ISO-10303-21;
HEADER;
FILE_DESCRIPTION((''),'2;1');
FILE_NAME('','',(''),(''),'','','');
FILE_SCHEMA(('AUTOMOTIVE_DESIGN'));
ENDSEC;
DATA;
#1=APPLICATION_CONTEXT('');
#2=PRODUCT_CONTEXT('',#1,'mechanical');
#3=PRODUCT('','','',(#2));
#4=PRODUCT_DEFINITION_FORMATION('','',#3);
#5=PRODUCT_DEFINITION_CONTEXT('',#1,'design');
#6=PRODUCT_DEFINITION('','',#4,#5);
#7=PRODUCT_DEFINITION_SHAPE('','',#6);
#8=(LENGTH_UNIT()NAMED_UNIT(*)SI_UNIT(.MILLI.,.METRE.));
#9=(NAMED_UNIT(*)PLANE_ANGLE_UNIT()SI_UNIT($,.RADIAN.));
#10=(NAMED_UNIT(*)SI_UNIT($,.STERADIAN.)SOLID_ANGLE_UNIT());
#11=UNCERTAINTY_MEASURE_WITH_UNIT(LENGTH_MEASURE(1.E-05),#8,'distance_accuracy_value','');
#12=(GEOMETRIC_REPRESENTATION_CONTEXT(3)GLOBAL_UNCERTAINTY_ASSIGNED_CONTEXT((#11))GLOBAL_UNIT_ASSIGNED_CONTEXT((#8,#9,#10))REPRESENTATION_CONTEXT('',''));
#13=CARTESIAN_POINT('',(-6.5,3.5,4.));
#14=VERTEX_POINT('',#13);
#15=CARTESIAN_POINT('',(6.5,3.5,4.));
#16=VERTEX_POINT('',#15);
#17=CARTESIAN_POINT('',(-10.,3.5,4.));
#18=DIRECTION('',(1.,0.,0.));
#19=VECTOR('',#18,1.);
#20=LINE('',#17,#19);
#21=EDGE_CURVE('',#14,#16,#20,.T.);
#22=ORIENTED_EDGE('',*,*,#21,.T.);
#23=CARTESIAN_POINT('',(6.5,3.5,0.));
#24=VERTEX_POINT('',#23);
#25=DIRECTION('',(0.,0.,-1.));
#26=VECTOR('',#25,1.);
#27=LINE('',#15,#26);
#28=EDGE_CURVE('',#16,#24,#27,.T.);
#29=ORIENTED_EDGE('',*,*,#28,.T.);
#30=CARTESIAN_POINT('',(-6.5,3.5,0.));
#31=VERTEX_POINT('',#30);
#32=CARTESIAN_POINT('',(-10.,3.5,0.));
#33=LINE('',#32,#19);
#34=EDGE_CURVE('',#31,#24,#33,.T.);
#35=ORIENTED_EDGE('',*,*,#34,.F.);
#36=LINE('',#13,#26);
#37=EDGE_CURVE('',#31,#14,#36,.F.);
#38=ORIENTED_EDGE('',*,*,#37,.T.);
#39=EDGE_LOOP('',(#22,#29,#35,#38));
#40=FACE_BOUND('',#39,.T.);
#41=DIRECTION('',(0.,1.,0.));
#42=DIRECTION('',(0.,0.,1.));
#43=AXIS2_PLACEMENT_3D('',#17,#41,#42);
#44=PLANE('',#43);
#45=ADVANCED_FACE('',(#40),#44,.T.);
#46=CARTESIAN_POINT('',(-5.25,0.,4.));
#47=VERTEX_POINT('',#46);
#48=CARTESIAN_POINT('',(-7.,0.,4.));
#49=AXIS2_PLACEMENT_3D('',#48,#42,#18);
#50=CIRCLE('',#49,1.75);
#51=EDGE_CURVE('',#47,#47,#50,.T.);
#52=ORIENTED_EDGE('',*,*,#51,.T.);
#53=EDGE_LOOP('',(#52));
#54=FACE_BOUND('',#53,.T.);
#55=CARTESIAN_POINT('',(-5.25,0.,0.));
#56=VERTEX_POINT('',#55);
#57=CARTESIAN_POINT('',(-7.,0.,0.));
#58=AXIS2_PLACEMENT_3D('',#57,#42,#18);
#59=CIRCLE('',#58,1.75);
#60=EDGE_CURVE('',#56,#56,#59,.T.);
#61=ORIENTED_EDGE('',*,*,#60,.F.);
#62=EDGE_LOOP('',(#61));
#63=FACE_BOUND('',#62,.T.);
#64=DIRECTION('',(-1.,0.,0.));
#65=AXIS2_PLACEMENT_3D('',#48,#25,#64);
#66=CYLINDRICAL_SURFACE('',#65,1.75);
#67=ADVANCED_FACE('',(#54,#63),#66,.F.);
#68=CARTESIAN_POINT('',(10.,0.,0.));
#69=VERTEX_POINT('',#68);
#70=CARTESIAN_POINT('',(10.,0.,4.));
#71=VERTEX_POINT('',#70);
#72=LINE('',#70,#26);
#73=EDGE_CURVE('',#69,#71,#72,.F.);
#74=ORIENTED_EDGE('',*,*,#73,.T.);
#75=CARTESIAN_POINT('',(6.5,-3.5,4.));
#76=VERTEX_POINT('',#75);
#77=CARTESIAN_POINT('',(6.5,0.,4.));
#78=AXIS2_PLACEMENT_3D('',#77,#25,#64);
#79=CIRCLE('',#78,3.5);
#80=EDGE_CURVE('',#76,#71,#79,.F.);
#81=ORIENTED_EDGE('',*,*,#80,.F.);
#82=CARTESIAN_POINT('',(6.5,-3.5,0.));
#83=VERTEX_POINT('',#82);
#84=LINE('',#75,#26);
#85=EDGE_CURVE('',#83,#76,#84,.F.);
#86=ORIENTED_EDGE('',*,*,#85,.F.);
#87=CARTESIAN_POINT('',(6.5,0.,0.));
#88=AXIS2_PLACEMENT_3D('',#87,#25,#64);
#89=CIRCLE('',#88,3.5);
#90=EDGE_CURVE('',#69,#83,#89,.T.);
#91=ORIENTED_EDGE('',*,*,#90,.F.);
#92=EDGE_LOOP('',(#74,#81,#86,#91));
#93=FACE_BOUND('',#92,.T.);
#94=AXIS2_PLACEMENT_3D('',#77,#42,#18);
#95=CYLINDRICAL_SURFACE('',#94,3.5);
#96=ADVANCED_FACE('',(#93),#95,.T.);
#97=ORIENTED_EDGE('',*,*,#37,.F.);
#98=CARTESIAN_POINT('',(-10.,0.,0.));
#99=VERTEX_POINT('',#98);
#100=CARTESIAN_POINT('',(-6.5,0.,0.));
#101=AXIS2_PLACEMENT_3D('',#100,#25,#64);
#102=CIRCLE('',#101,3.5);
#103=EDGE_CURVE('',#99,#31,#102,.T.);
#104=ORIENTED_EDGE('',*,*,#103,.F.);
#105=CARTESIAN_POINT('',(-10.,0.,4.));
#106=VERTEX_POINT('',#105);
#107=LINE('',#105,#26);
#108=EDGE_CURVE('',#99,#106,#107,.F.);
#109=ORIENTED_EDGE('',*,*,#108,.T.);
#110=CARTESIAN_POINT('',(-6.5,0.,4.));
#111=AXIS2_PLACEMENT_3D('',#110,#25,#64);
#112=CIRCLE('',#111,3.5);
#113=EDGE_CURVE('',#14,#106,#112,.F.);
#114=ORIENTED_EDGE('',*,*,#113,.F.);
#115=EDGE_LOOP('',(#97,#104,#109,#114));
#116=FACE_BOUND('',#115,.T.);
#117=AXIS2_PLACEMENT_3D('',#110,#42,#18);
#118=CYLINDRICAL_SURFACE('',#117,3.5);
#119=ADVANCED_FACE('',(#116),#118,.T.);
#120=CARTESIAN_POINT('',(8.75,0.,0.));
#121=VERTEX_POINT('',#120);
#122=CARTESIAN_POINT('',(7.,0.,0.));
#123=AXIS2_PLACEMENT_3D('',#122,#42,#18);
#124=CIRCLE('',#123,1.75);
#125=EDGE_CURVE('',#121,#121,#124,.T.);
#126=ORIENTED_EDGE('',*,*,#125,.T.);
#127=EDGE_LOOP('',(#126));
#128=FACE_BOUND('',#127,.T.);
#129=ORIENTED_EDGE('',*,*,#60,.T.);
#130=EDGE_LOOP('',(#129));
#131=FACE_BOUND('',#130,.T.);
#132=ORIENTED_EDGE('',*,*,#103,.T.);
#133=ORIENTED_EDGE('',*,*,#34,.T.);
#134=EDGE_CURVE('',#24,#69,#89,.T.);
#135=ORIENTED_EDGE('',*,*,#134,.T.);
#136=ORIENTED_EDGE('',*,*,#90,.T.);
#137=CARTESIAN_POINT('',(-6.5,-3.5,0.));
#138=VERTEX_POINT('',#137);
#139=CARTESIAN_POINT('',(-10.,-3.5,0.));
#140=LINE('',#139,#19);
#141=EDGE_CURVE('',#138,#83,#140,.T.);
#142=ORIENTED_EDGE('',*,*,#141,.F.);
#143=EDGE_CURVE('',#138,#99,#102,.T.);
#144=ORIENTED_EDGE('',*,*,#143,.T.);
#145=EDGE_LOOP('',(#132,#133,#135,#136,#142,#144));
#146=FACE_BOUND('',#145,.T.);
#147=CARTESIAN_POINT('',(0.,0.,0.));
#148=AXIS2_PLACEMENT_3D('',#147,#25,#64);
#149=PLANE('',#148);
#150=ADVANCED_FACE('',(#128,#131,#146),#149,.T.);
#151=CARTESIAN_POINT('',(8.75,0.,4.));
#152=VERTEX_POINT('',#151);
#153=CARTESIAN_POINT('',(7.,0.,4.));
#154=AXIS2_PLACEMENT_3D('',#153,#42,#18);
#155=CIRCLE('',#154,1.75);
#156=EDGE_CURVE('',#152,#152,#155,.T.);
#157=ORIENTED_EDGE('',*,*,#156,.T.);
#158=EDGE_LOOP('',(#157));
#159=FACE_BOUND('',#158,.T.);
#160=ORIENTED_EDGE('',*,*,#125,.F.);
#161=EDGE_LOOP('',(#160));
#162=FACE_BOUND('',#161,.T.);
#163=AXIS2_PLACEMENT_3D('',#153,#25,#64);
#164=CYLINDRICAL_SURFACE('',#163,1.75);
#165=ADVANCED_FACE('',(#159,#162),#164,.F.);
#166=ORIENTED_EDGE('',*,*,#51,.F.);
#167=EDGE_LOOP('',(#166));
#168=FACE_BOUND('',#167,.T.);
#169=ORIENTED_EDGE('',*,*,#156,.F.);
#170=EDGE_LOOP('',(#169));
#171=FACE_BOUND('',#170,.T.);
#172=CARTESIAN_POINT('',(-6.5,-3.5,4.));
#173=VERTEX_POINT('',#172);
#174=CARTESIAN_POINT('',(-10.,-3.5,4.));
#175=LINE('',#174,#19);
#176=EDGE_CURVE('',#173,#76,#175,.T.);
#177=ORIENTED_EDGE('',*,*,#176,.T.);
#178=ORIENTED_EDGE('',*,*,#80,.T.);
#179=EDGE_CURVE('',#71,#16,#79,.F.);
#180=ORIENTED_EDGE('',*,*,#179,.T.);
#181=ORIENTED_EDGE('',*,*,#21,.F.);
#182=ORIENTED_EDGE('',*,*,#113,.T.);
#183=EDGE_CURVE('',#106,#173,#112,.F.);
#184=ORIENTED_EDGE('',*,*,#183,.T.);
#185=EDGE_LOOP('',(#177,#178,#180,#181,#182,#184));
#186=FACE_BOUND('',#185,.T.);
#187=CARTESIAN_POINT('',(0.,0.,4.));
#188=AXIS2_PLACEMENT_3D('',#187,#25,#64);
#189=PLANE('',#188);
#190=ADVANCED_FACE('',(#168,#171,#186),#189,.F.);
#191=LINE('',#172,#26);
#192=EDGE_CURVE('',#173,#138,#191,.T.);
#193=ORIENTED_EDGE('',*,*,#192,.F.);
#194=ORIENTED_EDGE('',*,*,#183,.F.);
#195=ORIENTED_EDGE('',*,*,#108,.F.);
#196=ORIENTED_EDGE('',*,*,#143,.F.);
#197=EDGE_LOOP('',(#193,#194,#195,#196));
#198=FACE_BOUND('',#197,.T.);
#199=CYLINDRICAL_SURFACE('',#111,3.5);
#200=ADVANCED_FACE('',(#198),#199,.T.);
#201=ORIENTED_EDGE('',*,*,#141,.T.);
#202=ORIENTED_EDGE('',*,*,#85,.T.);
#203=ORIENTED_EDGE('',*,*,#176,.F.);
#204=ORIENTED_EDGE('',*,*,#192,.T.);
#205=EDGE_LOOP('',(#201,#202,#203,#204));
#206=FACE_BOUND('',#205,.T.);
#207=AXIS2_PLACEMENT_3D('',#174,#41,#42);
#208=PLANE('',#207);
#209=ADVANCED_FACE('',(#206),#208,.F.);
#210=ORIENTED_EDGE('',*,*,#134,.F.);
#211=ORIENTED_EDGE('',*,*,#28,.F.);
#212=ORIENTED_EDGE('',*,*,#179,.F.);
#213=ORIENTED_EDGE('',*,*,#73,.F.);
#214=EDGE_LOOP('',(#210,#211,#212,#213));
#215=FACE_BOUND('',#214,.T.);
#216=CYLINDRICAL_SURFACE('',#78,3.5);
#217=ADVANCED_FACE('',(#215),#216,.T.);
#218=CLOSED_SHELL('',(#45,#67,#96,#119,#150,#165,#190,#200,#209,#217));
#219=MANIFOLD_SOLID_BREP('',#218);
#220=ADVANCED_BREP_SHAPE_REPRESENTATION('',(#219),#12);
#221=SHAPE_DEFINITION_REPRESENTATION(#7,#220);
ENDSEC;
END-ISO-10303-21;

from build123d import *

# Parameters (mm, degrees)
SKETCH1_W           = 20
SKETCH1_H           = 7
SKETCH1_R           = 1.75
BOSS_EXTRUDE1_DEPTH = 4
FILLET1_R           = 3.5


with BuildPart() as part:
    # Sketch1 → Boss-Extrude1 (new body)
    with BuildSketch(Plane.XY):
        Rectangle(SKETCH1_W, SKETCH1_H)
        with Locations((-7, 0)):
            Circle(SKETCH1_R, mode=Mode.SUBTRACT)
        with Locations((7, 0)):
            Circle(SKETCH1_R, mode=Mode.SUBTRACT)
    extrude(amount=BOSS_EXTRUDE1_DEPTH)

    # Fillet1
    fillet1_edges = [part.edges().sort_by_distance(p)[0] for p in [
        (-10, 3.5, 2),
        (-10, -3.5, 2),
        (10, -3.5, 2),
        (10, 3.5, 2),
    ]]
    fillet(fillet1_edges, radius=FILLET1_R - 0.0001)  # a hair under: the kernel refuses the full size


solid = part.part
